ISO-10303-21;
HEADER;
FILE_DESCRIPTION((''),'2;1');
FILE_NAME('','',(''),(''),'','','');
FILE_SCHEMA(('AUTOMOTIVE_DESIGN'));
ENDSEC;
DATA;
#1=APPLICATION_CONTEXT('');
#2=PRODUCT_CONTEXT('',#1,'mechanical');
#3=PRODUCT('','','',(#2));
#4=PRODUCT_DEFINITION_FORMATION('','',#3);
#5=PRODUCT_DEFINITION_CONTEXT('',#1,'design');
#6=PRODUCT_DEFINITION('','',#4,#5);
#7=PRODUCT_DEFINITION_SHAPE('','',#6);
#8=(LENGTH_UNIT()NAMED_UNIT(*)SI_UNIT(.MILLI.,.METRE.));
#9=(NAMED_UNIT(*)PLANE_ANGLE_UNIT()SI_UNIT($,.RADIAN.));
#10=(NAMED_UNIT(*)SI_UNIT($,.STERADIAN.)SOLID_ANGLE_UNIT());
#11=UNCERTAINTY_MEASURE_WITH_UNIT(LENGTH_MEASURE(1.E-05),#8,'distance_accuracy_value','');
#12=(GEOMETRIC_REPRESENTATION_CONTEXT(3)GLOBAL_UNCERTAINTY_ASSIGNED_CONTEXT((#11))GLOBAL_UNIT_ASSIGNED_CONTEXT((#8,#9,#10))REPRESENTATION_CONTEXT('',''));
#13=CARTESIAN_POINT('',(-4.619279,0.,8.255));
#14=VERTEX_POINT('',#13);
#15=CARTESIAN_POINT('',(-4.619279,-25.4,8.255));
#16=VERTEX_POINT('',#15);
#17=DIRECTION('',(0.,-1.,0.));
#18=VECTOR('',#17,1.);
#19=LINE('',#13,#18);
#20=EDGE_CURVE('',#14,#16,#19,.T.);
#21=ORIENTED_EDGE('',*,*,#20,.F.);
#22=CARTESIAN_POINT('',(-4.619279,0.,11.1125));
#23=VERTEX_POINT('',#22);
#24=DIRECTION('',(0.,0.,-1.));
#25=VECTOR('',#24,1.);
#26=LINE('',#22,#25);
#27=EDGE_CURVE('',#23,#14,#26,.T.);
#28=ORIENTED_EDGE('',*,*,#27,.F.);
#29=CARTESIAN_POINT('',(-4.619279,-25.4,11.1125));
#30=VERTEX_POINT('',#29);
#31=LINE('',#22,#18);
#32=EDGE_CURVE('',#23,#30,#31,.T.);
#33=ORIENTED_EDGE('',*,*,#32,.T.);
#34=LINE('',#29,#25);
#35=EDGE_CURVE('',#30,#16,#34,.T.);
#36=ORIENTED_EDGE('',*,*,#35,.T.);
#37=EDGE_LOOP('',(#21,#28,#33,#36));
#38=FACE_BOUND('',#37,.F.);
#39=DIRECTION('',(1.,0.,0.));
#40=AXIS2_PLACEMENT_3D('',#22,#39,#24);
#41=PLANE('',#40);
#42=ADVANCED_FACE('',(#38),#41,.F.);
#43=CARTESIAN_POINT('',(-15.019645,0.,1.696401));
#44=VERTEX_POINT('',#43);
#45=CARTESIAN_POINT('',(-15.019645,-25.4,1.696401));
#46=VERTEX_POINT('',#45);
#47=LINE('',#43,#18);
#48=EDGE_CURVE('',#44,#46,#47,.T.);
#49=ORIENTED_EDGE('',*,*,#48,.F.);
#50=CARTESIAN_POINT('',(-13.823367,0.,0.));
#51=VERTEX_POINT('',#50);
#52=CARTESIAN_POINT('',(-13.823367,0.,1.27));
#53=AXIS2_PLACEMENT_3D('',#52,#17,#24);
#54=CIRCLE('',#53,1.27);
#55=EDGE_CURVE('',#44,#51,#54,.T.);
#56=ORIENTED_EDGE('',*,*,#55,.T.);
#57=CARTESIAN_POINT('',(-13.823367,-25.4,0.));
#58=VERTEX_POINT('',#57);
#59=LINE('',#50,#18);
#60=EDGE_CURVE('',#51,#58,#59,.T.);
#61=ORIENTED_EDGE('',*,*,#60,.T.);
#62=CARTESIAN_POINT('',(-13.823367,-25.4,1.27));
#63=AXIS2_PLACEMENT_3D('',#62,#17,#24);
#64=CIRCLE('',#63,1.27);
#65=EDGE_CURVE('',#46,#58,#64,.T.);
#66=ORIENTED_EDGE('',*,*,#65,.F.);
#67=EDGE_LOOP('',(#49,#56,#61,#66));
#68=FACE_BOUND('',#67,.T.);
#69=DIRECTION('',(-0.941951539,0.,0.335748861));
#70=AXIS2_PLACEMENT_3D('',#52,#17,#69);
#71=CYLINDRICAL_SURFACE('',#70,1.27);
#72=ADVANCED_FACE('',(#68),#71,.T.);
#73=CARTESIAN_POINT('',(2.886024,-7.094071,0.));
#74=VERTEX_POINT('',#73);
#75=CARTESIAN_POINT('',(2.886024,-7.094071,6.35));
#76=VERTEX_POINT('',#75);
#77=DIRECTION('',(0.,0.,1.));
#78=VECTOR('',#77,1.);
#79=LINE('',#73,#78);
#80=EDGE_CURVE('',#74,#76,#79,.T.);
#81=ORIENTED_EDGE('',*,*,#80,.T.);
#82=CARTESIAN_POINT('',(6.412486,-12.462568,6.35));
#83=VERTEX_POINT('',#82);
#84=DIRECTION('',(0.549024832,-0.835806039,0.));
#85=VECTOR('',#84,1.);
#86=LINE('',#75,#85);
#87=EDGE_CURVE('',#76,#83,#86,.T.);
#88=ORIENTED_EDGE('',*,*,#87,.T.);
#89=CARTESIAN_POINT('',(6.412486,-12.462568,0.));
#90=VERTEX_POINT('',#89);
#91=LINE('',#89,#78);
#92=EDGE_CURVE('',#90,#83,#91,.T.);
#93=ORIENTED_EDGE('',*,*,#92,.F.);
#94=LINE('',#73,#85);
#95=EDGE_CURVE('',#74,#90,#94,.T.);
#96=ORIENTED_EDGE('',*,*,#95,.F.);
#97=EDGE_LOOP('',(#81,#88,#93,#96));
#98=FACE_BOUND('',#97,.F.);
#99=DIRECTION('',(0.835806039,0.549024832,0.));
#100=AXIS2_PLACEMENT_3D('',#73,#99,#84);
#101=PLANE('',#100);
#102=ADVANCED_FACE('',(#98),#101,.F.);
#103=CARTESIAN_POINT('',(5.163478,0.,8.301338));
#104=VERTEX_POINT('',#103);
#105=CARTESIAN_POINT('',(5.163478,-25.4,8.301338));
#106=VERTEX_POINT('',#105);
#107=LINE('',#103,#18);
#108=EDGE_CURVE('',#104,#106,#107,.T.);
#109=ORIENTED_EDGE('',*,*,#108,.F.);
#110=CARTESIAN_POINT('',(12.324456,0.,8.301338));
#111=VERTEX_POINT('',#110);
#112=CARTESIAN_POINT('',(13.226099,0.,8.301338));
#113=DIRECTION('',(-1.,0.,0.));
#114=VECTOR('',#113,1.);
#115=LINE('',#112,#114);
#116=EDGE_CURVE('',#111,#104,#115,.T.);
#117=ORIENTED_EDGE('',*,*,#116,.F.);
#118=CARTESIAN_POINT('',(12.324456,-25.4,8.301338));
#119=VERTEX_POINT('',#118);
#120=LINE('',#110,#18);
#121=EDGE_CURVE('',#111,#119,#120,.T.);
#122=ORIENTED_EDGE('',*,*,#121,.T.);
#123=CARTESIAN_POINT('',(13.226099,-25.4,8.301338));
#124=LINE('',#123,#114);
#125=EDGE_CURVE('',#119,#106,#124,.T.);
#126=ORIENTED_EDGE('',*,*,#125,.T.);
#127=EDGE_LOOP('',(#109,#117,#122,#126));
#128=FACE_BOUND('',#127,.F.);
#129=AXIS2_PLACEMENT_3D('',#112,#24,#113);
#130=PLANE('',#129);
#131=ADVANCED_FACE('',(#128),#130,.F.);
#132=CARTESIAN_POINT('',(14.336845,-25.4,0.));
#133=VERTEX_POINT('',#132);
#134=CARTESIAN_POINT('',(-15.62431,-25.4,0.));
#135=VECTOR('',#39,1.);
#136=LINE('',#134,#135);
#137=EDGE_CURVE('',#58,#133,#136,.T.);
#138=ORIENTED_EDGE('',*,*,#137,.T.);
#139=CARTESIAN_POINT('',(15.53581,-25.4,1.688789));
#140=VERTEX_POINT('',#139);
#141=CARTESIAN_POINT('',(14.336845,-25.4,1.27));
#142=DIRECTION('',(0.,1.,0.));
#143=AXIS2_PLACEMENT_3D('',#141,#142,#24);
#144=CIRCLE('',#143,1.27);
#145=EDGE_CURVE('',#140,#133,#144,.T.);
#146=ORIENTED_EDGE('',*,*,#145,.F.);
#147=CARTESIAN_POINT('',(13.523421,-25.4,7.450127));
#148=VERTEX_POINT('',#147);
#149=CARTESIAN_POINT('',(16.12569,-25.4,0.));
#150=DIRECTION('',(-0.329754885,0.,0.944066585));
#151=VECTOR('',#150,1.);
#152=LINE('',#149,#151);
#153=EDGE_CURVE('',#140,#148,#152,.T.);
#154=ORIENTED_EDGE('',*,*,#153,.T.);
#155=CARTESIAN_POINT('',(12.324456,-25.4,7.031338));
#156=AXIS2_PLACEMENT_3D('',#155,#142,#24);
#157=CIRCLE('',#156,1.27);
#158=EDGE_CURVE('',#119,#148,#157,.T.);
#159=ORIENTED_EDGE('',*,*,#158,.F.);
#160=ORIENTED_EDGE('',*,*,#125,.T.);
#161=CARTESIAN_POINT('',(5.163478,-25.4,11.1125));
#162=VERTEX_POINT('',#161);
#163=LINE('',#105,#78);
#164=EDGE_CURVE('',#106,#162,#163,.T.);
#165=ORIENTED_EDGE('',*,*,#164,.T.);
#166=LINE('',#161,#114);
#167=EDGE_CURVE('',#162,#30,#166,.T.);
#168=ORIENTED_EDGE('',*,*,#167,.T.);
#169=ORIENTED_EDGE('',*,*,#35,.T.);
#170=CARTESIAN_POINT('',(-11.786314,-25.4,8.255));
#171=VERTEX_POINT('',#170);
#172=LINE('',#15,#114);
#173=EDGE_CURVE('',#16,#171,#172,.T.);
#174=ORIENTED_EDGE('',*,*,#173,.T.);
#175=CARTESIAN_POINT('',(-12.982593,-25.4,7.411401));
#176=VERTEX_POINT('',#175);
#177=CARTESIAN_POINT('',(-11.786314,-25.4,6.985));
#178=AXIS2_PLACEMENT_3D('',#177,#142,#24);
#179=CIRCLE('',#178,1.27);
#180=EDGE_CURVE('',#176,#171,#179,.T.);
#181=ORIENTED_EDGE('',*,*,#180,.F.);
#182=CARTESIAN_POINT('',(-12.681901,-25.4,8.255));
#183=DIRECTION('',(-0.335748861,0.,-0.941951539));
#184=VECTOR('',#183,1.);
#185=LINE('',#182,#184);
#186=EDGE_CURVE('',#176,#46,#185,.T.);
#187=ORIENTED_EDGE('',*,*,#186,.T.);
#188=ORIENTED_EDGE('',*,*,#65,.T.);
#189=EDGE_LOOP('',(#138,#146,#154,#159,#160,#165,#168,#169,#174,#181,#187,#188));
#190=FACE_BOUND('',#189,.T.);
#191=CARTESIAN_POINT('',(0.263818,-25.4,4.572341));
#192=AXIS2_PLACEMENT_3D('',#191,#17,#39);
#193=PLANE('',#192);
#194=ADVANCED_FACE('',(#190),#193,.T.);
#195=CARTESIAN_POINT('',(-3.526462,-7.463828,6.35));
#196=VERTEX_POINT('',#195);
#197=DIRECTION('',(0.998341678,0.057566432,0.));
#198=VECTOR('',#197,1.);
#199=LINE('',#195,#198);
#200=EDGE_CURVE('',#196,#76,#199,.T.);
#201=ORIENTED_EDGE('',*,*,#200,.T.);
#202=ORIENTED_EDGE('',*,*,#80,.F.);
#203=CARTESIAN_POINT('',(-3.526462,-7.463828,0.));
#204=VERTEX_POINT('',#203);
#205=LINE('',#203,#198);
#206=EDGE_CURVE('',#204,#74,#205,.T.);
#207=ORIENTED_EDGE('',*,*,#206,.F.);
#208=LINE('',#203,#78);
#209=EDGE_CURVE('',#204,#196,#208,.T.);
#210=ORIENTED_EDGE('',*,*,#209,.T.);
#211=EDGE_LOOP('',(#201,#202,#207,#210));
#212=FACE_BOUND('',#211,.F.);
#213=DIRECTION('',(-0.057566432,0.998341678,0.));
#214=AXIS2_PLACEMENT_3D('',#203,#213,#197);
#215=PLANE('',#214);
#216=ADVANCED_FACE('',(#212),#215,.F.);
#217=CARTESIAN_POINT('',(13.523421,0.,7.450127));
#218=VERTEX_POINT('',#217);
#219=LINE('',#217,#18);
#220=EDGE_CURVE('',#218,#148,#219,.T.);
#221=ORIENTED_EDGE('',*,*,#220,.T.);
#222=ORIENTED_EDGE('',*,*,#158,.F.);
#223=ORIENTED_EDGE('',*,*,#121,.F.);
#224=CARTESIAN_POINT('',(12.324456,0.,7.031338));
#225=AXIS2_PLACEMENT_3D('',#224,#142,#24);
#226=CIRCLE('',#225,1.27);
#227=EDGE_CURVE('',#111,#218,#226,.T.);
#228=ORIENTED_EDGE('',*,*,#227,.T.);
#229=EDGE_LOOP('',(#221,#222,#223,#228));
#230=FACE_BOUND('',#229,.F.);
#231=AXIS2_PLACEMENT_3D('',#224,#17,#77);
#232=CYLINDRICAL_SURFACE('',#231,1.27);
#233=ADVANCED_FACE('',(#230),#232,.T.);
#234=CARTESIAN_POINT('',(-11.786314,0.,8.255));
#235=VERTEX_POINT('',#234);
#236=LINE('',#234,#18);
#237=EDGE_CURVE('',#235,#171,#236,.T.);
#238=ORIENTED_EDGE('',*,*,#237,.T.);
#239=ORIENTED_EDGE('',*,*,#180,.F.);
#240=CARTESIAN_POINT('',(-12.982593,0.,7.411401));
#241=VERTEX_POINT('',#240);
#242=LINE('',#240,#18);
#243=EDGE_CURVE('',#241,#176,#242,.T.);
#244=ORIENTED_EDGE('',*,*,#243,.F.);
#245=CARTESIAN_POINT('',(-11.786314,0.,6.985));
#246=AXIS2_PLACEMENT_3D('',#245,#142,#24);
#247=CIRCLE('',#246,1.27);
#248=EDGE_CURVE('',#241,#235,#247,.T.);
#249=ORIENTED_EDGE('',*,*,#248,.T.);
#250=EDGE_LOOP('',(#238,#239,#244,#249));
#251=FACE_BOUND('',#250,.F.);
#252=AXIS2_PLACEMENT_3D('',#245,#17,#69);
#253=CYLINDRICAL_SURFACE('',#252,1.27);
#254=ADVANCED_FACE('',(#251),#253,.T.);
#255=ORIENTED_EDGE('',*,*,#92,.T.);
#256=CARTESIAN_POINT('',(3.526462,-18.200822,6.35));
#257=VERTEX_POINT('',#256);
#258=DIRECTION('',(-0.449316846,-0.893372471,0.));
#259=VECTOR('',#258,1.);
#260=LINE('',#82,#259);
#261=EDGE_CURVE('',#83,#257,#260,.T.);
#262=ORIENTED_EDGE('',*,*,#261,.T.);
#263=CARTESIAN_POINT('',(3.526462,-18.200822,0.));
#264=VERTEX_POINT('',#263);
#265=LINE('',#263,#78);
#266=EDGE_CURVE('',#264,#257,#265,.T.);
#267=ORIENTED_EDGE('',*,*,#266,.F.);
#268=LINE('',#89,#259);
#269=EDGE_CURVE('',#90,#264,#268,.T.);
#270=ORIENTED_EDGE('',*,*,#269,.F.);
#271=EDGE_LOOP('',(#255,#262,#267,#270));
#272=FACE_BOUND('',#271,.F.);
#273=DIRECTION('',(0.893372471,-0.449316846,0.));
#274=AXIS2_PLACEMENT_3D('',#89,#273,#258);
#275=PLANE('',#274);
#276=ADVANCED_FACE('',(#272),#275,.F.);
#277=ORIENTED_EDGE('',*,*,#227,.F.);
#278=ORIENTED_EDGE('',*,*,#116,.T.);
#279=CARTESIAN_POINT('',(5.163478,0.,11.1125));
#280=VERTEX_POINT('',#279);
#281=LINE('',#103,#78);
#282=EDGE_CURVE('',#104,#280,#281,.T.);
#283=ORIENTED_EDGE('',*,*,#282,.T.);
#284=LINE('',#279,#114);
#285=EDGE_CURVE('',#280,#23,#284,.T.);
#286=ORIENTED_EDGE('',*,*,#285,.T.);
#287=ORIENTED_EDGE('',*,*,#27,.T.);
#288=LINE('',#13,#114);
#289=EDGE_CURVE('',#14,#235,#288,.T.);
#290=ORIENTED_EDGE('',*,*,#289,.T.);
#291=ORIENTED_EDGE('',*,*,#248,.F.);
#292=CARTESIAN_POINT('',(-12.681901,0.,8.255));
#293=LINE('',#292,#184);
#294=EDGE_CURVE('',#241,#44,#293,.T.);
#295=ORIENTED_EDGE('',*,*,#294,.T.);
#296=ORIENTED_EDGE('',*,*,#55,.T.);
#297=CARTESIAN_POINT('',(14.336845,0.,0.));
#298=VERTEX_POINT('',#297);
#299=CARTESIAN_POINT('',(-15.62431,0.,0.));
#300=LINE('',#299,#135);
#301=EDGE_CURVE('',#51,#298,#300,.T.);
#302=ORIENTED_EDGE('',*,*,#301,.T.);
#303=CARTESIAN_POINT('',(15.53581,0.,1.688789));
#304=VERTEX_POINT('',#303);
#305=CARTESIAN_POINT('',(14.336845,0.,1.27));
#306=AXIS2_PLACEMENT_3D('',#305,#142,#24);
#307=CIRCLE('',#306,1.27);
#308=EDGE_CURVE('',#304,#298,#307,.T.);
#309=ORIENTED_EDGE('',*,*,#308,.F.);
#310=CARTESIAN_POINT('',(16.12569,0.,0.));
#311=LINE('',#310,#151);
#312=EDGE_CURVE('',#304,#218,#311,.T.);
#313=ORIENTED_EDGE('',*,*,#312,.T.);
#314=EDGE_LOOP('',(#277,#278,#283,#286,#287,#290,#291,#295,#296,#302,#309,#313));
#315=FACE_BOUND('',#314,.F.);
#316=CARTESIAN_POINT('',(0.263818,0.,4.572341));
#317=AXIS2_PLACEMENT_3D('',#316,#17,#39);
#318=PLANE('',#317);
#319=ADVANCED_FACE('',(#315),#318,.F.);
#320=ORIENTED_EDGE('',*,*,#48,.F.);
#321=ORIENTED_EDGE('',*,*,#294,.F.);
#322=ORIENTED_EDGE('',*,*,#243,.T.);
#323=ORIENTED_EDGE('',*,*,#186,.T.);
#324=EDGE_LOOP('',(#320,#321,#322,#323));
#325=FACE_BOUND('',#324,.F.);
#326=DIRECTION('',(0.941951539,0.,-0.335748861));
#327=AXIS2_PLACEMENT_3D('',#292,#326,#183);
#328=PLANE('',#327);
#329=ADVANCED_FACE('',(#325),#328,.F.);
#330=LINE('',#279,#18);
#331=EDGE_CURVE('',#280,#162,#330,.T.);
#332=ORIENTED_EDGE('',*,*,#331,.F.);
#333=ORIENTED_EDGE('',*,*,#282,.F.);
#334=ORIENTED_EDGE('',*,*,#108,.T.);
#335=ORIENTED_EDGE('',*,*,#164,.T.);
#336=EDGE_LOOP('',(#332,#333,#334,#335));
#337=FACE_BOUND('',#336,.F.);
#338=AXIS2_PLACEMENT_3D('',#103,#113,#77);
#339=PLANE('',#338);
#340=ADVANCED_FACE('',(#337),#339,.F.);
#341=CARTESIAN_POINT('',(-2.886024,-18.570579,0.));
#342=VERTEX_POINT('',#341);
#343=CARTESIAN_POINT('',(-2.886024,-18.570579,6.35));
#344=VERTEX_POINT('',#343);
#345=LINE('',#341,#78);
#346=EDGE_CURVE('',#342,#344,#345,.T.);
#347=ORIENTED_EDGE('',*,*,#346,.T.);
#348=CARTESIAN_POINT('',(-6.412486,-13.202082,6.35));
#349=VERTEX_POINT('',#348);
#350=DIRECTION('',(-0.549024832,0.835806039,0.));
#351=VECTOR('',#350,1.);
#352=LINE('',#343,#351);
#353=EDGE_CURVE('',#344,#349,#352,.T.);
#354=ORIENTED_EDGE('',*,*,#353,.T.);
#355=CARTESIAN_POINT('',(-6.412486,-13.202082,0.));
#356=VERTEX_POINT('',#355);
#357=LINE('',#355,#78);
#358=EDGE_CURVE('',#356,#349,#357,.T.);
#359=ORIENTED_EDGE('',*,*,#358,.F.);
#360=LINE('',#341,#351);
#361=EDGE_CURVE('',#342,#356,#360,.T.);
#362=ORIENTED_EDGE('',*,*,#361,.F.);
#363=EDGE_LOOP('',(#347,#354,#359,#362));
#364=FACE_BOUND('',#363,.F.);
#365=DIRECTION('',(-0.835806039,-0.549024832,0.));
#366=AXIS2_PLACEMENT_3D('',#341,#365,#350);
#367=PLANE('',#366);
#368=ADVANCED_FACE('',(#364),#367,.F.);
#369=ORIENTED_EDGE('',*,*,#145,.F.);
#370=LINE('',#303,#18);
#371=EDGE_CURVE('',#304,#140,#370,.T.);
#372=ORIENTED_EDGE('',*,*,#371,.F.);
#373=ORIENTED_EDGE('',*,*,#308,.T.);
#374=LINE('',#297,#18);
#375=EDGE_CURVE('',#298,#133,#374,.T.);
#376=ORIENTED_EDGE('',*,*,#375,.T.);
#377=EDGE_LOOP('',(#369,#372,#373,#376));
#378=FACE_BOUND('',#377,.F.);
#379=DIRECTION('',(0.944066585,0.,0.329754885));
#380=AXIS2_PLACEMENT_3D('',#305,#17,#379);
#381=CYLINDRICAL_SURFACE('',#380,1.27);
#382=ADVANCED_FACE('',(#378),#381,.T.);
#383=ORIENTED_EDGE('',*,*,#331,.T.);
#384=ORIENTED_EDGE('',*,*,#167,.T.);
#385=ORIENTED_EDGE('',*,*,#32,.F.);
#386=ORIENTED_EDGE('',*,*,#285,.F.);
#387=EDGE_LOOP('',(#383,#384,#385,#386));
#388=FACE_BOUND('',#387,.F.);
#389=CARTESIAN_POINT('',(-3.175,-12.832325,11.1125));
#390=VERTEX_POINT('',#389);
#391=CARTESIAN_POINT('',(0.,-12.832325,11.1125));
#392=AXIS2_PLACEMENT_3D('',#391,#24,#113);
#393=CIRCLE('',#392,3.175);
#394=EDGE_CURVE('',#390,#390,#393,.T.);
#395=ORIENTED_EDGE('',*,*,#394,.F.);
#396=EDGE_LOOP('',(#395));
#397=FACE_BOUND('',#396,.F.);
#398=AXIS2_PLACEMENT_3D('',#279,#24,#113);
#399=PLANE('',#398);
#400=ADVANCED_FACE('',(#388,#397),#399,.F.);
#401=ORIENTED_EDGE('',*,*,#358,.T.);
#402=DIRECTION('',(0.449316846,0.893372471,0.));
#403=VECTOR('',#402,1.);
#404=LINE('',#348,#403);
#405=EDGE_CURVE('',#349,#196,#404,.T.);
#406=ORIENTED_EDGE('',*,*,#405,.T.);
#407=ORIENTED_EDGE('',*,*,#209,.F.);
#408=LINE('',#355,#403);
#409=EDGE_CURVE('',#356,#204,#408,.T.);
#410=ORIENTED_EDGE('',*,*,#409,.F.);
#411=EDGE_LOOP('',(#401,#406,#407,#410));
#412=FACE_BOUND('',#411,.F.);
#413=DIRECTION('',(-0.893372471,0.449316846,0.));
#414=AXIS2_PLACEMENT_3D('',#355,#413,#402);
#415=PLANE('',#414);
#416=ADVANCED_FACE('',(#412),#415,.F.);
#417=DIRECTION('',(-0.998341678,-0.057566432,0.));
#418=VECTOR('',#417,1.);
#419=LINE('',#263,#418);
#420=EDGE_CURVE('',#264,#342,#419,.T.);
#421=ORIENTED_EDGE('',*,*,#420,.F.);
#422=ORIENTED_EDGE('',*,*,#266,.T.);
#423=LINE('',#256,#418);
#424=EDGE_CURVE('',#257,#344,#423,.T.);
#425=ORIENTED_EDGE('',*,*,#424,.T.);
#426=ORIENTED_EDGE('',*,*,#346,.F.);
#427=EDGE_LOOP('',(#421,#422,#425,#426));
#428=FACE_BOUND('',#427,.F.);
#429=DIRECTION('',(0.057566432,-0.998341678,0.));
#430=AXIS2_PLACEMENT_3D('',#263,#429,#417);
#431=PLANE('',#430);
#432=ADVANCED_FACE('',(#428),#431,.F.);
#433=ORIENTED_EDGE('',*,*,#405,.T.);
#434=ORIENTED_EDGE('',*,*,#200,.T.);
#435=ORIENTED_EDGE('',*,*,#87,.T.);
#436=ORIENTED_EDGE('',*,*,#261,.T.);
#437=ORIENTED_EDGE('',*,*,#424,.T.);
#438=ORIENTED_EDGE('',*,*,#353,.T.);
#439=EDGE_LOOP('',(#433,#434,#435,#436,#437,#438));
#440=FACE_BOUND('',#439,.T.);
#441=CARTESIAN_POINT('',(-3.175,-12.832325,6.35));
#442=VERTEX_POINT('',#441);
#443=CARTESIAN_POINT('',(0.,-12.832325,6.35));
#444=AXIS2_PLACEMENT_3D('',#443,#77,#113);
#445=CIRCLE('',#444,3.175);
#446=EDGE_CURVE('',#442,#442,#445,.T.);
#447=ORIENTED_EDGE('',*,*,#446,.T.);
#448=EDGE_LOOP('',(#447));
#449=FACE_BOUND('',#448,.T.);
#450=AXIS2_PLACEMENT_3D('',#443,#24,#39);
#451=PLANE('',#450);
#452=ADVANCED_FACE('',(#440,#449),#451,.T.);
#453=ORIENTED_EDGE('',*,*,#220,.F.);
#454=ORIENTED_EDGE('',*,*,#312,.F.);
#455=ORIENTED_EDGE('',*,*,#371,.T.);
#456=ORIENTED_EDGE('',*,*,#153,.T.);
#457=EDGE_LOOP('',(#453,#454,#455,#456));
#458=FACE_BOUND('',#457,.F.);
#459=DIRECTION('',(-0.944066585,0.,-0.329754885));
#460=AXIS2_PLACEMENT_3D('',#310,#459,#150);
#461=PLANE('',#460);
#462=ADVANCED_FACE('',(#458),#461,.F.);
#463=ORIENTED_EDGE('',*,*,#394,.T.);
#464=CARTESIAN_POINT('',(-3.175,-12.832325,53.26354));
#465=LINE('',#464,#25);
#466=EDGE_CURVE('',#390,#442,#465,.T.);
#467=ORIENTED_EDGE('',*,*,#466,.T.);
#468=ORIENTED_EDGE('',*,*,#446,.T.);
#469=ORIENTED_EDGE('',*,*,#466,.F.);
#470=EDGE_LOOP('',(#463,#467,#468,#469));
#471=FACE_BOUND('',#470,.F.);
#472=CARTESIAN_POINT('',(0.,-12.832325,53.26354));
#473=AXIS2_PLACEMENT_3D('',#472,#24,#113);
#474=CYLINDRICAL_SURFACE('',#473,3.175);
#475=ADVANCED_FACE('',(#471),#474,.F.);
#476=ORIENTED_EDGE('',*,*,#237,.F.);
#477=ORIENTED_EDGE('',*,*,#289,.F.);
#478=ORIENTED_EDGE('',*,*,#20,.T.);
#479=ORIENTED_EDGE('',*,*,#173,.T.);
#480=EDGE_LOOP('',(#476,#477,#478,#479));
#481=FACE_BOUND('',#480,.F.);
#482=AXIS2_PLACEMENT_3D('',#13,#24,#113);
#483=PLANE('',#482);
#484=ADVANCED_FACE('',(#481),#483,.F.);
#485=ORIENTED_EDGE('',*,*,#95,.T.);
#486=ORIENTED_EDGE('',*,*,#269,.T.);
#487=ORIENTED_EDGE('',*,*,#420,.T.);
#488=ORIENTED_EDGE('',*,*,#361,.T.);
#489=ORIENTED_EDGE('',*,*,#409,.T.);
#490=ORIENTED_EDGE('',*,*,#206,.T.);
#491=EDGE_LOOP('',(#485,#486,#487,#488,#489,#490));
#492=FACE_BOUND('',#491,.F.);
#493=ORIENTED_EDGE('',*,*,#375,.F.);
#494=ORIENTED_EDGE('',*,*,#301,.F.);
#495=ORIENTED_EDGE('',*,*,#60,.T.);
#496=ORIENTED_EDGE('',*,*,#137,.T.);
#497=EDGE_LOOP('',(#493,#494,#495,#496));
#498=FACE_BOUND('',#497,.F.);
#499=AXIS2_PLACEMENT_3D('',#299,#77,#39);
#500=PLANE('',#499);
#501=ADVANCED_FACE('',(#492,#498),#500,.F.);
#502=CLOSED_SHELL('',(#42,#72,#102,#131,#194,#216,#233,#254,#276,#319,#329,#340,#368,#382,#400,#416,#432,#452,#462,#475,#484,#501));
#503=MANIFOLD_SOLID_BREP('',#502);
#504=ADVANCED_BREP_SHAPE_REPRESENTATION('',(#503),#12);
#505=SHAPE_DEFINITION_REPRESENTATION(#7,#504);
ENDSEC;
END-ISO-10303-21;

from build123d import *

# Parameters (mm, degrees)
F1_DEPTH = 25.4
F3_D     = 6.35
F4_R     = 3.175
F5_DEPTH = 6.35
F6_R     = 1.27


with BuildPart() as f1:
    # F0 (on Front) → F1 (new body)
    with BuildSketch(Plane.XZ):
        Polygon((-12.6819006406, 8.255), (-15.624309808, 0), (16.125690192, 0), (13.2260993594, 8.3013381809), (5.1634775414, 8.3013381809), (5.1634775414, 11.1125), (-4.6192788226, 11.1125), (-4.6192788226, 8.255), align=None)
    extrude(amount=F1_DEPTH)

    # F3 (through all)
    with Locations(Plane.XY.offset(11.1125)):
        with Locations((0, -12.8323249519)):
            Hole(F3_D / 2)

    # F4 (on face) → F5 (cut)
    with BuildSketch(Plane(origin=(0, 0, 0), x_dir=(1, 0, 0), z_dir=(0, 0, -1))):
        Polygon((-6.4124855846, 13.2020820447), (-3.5264618279, 7.4638280807), (2.8860237566, 7.0940709878), (6.4124855846, 12.462567859), (3.5264618279, 18.2008218231), (-2.8860237566, 18.570578916), align=None)
        with Locations((0, 12.8323249519)):
            Circle(F4_R, mode=Mode.SUBTRACT)
    extrude(amount=-F5_DEPTH, mode=Mode.SUBTRACT)

    # F6
    f6_edges = [f1.edges().sort_by_distance(p)[0] for p in [
        (16.12569, -12.7, 0),
        (-15.62431, -12.7, 0),
        (13.226099, -12.7, 8.301338),
        (-12.681901, -12.7, 8.255),
    ]]
    fillet(f6_edges, radius=F6_R)


solid = f1.part
